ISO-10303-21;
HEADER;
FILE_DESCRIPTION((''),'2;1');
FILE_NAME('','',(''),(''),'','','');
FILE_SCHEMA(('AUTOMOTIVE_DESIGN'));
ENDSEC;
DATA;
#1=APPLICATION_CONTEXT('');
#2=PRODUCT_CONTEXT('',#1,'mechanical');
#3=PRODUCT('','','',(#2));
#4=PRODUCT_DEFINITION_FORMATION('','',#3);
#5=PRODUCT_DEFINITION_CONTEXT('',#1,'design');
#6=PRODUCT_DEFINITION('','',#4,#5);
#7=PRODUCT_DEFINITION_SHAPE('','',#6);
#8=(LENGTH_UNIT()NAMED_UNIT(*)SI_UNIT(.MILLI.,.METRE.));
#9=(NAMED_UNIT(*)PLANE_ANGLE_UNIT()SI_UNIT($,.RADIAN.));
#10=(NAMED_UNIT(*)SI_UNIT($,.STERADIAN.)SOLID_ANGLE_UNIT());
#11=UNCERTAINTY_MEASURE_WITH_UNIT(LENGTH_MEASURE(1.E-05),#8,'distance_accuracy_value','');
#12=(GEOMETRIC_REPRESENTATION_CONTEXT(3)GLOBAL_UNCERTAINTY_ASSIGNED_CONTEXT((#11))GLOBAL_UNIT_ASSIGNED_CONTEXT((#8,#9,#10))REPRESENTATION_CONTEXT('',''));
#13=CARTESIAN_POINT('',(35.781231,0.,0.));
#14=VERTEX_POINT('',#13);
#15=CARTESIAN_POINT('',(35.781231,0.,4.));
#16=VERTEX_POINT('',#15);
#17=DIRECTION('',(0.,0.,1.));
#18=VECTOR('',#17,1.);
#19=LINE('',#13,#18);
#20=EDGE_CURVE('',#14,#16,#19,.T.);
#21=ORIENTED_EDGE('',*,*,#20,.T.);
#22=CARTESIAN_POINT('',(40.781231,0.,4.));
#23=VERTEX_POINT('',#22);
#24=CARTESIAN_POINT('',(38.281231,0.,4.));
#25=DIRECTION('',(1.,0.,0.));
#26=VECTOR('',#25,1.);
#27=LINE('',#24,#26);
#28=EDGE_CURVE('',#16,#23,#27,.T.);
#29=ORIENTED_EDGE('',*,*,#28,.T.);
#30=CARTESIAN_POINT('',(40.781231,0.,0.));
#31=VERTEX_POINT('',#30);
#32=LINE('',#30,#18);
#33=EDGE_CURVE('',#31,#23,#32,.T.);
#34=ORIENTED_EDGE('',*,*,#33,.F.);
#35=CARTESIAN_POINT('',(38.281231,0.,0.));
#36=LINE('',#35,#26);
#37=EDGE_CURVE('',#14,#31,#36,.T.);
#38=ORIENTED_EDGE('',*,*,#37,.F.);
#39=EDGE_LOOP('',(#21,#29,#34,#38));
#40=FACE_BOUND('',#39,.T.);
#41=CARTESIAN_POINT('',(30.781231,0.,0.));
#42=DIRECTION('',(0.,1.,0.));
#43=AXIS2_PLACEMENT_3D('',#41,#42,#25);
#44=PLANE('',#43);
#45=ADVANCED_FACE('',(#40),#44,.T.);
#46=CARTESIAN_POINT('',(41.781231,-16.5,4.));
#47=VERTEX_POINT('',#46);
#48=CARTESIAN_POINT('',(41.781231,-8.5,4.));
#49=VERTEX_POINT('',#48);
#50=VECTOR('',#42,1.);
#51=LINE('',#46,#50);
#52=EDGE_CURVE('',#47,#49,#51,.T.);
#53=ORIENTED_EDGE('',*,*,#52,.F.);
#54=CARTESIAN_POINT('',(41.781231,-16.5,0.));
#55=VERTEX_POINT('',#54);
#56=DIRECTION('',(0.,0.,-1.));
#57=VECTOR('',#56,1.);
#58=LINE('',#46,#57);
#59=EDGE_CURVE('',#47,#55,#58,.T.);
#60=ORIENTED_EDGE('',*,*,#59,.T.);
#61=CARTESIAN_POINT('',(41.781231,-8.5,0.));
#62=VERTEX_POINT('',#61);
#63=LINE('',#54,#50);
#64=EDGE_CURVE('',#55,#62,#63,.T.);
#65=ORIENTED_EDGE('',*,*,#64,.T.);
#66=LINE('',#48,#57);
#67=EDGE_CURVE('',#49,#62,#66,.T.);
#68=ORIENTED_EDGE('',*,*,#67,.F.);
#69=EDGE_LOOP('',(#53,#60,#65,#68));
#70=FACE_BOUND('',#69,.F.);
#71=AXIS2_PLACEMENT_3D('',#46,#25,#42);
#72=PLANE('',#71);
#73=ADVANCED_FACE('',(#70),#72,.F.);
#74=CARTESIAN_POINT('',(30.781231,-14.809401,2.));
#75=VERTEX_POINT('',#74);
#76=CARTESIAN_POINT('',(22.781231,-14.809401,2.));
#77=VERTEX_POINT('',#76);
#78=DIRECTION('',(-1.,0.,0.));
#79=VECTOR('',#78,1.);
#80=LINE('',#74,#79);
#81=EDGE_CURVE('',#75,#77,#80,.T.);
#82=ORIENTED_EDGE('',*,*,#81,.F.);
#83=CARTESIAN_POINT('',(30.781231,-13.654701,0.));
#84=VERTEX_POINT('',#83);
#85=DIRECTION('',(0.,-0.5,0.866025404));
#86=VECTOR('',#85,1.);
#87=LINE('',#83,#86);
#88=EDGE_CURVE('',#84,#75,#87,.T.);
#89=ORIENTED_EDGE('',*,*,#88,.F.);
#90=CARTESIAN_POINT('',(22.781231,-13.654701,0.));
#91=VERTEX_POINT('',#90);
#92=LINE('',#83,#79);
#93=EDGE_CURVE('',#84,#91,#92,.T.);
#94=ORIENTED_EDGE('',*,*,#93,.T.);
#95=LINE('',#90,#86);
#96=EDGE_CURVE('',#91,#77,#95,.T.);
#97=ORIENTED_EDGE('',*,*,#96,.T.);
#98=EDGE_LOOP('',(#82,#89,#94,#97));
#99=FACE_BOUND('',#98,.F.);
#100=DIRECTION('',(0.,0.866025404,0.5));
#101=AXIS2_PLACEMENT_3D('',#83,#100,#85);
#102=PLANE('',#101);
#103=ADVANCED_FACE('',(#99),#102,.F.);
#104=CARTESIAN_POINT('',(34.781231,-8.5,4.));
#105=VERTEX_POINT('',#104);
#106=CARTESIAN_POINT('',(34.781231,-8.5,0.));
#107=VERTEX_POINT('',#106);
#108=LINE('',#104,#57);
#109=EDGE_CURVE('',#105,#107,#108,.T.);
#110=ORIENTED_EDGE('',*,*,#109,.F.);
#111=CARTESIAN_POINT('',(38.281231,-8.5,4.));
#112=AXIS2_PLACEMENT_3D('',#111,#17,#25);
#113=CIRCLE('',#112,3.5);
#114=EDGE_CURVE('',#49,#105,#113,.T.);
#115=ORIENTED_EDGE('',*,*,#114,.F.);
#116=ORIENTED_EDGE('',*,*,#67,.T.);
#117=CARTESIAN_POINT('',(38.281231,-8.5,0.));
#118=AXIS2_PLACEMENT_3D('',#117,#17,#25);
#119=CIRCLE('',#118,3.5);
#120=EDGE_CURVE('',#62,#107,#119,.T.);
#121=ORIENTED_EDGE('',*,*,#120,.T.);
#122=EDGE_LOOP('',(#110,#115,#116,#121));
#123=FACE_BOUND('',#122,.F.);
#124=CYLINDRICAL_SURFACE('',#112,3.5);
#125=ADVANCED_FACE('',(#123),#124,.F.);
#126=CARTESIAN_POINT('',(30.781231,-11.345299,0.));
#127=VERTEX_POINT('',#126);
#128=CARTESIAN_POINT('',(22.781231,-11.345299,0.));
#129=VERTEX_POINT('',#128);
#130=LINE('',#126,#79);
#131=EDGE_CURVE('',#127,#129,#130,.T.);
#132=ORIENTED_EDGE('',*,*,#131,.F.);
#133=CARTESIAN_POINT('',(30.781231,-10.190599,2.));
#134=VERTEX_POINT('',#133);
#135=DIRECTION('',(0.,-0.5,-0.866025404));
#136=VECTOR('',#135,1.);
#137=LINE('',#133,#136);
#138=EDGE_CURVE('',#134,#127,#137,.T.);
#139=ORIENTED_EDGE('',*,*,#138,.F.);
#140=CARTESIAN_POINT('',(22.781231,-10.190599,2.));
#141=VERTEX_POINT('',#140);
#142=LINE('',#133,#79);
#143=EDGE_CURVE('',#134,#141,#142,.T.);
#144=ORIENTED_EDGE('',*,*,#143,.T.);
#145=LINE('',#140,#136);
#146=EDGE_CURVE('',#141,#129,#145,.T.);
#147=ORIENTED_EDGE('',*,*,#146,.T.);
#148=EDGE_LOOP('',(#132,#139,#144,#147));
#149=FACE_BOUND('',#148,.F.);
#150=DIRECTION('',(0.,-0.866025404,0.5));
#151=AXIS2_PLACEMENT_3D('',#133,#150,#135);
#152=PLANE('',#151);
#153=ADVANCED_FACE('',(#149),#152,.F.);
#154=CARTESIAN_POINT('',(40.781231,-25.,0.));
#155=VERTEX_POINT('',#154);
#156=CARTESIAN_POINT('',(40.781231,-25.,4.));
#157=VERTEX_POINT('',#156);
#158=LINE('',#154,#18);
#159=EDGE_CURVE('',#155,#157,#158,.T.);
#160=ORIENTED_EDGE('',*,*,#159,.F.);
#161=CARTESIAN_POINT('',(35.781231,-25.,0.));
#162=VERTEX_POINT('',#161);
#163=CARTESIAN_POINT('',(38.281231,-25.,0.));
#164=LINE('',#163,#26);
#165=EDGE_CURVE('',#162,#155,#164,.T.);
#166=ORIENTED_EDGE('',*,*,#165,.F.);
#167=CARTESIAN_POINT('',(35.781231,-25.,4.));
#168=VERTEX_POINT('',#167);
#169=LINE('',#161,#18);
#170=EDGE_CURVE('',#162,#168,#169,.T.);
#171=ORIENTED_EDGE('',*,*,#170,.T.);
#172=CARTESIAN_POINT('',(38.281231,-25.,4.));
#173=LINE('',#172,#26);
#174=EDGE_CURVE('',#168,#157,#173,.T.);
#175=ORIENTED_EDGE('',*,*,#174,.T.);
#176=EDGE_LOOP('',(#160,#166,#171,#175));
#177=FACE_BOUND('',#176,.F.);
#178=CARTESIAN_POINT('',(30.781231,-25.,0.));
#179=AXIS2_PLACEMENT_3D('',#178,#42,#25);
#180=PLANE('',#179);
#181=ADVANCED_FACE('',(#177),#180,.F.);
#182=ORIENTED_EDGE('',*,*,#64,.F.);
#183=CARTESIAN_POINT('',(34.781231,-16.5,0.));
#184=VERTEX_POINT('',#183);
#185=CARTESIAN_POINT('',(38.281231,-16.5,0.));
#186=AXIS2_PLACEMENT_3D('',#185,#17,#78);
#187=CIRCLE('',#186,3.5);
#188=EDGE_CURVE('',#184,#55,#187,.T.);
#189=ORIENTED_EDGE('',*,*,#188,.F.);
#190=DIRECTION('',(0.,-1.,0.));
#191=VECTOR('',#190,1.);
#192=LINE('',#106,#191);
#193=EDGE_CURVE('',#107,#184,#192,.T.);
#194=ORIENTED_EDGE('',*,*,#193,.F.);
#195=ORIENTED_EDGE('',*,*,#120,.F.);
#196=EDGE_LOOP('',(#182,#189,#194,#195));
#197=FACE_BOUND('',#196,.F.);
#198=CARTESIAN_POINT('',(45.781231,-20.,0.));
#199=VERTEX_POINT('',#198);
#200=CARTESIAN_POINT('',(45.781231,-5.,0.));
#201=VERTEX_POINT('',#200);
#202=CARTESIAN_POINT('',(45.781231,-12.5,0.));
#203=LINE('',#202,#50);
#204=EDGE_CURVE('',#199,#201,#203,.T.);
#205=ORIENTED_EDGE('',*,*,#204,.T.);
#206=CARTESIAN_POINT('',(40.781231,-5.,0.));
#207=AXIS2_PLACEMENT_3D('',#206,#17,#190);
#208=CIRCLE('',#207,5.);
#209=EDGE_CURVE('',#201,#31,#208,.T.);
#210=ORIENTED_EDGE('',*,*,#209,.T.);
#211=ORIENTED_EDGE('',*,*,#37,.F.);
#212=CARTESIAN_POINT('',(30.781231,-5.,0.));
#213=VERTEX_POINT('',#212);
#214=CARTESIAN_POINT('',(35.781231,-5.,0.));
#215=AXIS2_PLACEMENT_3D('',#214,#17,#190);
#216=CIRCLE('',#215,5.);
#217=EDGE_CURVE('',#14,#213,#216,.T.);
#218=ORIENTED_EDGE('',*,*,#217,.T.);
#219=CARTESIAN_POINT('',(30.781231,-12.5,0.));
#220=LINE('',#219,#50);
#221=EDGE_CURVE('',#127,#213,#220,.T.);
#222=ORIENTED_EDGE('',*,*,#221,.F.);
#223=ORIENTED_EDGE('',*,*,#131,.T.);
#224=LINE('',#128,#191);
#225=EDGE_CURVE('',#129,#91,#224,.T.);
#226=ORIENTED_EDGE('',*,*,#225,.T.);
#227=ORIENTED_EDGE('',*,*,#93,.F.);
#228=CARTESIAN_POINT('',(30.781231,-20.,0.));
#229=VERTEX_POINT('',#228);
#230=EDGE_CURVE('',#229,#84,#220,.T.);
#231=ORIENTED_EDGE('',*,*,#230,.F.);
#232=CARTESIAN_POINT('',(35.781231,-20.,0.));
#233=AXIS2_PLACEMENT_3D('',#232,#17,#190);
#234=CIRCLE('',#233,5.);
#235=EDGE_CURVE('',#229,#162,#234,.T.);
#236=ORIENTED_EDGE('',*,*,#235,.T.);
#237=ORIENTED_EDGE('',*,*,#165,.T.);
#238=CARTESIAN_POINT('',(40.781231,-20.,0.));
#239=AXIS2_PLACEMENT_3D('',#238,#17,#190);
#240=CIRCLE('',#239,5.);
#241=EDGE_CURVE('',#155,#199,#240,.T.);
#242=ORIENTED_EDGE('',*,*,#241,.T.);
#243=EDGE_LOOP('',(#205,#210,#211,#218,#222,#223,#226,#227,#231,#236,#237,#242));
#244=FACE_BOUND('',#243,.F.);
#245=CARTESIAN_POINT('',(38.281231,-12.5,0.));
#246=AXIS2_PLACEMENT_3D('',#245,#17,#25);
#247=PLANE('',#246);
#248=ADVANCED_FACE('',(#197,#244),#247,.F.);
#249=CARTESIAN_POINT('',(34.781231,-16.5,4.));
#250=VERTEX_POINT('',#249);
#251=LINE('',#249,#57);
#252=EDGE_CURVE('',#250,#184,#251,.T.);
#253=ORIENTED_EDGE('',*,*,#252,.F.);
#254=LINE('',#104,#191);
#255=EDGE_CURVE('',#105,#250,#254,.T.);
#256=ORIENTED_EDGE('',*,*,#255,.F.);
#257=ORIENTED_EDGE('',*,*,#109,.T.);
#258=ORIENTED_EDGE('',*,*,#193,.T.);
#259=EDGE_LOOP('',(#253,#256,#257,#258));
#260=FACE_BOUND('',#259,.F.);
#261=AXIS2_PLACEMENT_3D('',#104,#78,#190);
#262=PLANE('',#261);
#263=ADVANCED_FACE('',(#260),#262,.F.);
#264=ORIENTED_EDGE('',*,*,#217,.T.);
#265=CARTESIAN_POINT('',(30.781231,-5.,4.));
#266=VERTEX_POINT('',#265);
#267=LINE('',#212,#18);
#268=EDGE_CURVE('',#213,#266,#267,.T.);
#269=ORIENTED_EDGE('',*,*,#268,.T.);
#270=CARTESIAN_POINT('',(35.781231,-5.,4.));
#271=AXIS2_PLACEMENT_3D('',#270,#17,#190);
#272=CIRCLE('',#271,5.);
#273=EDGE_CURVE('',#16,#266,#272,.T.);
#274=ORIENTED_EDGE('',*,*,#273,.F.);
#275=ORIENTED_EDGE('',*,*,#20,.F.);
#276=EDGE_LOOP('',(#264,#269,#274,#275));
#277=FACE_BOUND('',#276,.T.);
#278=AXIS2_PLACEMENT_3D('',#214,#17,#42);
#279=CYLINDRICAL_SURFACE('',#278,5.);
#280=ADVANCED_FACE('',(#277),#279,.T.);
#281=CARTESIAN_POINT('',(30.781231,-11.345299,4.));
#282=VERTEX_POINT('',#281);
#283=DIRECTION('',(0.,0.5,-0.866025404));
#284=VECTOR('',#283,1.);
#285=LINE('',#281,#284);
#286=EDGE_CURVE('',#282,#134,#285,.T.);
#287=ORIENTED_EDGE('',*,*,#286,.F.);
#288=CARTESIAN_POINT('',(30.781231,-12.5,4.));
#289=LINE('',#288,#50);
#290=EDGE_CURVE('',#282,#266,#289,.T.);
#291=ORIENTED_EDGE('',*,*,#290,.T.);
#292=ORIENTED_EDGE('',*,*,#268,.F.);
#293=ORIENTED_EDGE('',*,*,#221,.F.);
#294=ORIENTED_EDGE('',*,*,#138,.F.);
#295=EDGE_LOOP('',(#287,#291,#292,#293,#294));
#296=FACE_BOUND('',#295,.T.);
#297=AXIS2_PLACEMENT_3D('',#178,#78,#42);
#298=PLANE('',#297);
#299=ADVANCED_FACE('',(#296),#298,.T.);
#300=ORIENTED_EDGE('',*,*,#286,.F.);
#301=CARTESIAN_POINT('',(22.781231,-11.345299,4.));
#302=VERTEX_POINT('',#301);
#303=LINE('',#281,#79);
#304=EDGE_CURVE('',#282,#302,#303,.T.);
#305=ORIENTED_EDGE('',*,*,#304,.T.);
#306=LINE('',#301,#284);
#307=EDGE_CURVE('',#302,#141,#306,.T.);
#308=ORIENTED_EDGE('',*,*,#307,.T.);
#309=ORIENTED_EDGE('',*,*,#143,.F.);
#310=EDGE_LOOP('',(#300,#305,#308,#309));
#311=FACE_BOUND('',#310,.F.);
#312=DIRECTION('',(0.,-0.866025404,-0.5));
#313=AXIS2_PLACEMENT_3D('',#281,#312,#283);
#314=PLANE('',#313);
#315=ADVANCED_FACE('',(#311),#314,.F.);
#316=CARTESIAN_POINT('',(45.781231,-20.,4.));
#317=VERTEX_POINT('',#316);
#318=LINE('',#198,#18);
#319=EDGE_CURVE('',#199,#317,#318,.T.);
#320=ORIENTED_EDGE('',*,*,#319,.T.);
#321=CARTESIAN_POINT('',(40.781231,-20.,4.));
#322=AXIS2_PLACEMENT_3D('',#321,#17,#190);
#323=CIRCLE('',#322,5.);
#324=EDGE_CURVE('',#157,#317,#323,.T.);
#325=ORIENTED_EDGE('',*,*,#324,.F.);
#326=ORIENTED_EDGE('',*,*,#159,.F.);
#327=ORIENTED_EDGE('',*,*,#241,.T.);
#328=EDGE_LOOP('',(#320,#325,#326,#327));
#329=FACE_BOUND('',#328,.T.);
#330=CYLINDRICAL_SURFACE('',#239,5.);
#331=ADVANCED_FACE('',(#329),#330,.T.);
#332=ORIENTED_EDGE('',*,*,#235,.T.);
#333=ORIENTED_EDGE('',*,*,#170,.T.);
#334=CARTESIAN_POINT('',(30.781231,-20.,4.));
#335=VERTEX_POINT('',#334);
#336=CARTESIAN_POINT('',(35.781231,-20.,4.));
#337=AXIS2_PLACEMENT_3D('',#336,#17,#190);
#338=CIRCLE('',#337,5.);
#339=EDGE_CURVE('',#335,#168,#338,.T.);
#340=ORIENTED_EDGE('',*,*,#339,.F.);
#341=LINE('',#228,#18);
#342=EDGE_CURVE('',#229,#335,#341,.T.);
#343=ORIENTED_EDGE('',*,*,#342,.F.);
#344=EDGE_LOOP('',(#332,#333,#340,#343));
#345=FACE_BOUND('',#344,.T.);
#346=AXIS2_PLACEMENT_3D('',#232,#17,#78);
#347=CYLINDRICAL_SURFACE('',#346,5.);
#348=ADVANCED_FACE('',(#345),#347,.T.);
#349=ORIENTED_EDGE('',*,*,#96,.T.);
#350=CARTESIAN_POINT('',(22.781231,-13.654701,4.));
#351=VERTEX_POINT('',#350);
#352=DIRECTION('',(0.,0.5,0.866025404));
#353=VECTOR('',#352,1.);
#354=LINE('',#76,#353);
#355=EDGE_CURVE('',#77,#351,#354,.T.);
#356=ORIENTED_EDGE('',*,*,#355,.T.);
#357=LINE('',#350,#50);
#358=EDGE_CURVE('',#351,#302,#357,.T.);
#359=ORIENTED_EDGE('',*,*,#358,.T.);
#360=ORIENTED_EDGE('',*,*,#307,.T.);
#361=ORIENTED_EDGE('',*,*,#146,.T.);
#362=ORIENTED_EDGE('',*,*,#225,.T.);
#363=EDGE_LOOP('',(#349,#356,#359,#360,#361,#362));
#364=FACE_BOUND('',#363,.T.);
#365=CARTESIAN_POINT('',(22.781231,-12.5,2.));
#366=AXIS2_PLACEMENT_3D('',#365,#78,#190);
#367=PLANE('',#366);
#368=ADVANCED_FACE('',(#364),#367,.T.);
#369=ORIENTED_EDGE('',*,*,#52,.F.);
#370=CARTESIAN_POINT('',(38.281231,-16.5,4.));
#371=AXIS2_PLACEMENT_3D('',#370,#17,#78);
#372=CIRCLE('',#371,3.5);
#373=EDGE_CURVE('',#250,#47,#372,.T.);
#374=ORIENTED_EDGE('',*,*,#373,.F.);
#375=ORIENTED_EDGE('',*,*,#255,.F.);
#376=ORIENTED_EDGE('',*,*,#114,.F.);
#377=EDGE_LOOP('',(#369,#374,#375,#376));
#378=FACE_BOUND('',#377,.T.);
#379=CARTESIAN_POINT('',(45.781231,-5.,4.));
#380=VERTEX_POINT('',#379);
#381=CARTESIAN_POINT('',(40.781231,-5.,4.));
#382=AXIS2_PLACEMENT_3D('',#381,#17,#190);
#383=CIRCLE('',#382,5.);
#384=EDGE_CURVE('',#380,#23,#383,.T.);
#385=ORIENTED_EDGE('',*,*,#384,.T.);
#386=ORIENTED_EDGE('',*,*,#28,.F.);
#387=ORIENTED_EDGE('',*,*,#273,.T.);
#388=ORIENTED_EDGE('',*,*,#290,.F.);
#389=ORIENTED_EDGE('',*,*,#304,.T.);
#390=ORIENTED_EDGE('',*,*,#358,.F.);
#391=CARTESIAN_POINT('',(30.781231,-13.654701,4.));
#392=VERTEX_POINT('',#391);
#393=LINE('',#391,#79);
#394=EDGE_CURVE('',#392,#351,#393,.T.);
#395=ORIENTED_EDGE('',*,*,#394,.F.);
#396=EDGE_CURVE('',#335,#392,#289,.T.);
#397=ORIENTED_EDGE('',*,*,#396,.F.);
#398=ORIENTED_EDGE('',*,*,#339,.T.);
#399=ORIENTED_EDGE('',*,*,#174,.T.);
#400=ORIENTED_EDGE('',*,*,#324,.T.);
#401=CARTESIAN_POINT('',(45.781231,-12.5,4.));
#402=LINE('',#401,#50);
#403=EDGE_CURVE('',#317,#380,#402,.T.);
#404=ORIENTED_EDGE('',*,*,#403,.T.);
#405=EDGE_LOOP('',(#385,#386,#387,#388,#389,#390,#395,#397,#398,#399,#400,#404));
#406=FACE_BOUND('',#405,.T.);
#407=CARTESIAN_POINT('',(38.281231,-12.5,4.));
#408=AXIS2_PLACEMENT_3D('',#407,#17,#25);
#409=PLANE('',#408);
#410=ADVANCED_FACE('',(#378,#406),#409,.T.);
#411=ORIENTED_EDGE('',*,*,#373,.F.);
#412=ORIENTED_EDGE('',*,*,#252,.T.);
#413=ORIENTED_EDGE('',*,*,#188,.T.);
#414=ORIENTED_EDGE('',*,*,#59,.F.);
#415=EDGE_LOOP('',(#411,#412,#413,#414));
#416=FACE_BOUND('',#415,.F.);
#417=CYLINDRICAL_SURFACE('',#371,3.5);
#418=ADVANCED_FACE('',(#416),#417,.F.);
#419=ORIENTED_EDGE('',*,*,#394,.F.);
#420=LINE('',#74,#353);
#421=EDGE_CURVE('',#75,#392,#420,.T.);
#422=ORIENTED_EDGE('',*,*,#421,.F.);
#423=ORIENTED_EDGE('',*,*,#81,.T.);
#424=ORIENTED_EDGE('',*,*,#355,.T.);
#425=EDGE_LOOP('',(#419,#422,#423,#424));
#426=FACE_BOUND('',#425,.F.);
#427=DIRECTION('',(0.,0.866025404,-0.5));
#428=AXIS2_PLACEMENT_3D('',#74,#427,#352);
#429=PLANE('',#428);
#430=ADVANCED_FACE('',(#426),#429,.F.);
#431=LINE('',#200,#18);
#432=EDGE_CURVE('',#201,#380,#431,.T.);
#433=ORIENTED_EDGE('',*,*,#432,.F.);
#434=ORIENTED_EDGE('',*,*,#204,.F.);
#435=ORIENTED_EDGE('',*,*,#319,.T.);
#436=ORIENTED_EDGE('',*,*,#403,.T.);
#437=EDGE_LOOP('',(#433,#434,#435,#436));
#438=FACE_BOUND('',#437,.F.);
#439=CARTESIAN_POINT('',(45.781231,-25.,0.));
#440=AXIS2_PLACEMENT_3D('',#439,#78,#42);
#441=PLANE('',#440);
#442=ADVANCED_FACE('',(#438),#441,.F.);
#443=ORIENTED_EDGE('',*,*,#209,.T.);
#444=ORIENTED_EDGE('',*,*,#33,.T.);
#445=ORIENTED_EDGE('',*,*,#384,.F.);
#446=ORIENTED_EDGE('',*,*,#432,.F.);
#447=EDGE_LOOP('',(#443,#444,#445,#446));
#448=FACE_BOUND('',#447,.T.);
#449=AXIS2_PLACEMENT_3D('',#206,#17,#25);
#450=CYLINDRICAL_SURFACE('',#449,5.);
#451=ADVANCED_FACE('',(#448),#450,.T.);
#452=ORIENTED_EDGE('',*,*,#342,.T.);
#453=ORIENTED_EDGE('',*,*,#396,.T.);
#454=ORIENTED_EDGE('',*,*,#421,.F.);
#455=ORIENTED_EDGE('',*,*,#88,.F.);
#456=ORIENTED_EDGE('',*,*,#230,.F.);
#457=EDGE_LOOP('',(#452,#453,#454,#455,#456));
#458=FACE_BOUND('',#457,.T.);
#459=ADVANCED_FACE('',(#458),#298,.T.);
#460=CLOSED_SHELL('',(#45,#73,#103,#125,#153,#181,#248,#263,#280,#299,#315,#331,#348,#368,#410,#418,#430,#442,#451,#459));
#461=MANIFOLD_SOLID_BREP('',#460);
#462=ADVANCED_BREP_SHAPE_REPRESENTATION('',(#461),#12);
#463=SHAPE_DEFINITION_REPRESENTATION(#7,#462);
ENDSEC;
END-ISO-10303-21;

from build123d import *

# Parameters (mm, degrees)
F0_W     = 15
F0_H     = 25
F1_DEPTH = 4
F3_DEPTH = 8
F5_DEPTH = 4
F6_R     = 5


# Not quite as in the source:
# - a feature names something its author has since deleted; it is built from what else it names


with BuildPart() as f1:
    # F0 (on Top) → F1 (new body)
    with BuildSketch(Plane.XY):
        with Locations((38.2812308715, -12.5)):
            Rectangle(F0_W, F0_H)
    extrude(amount=F1_DEPTH)

    # F2 (on face) → F3 (join)
    with BuildSketch(Plane(origin=(30.7812308715, 0, 0), x_dir=(0, -1, 0), z_dir=(-1, 0, 0))):
        Polygon((13.6547005384, 0), (14.8094010768, 2), (13.6547005384, 4), (11.3452994616, 4), (10.1905989232, 2), (11.3452994616, 0), align=None)
    extrude(amount=F3_DEPTH)

    # F4 (on face) → F5 (cut, through all)
    with BuildSketch(Plane.XY.offset(4)):
        with BuildLine():
            Line((34.7812308715, -16.5), (41.7812308715, -16.5))
            ThreePointArc((41.7812308715, -16.5), (38.2812308715, -13), (34.7812308715, -16.5))
        make_face()
        with BuildLine():
            ThreePointArc((34.7812308715, -16.5), (38.2812308715, -20), (41.7812308715, -16.5))
            Line((41.7812308715, -16.5), (34.7812308715, -16.5))
        make_face()
        with BuildLine():
            ThreePointArc((34.7812308715, -16.5), (38.2812308715, -13), (41.7812308715, -16.5))
            Line((41.7812308715, -16.5), (41.7812308715, -8.5))
            ThreePointArc((41.7812308715, -8.5), (38.2812308715, -12), (34.7812308715, -8.5))
            Line((34.7812308715, -8.5), (34.7812308715, -16.5))
        make_face()
        with BuildLine():
            Line((34.7812308715, -8.5), (41.7812308715, -8.5))
            ThreePointArc((41.7812308715, -8.5), (38.2812308715, -5), (34.7812308715, -8.5))
        make_face()
        with BuildLine():
            ThreePointArc((34.7812308715, -8.5), (38.2812308715, -12), (41.7812308715, -8.5))
            Line((41.7812308715, -8.5), (34.7812308715, -8.5))
        make_face()
    extrude(amount=-F5_DEPTH, mode=Mode.SUBTRACT)

    # F6
    f6_edges = [f1.edges().sort_by_distance(p)[0] for p in [
        (45.781231, 0, 2),
        (30.781231, 0, 2),
        (45.781231, -25, 2),
        (30.781231, -25, 2),
    ]]
    fillet(f6_edges, radius=F6_R)


solid = f1.part
